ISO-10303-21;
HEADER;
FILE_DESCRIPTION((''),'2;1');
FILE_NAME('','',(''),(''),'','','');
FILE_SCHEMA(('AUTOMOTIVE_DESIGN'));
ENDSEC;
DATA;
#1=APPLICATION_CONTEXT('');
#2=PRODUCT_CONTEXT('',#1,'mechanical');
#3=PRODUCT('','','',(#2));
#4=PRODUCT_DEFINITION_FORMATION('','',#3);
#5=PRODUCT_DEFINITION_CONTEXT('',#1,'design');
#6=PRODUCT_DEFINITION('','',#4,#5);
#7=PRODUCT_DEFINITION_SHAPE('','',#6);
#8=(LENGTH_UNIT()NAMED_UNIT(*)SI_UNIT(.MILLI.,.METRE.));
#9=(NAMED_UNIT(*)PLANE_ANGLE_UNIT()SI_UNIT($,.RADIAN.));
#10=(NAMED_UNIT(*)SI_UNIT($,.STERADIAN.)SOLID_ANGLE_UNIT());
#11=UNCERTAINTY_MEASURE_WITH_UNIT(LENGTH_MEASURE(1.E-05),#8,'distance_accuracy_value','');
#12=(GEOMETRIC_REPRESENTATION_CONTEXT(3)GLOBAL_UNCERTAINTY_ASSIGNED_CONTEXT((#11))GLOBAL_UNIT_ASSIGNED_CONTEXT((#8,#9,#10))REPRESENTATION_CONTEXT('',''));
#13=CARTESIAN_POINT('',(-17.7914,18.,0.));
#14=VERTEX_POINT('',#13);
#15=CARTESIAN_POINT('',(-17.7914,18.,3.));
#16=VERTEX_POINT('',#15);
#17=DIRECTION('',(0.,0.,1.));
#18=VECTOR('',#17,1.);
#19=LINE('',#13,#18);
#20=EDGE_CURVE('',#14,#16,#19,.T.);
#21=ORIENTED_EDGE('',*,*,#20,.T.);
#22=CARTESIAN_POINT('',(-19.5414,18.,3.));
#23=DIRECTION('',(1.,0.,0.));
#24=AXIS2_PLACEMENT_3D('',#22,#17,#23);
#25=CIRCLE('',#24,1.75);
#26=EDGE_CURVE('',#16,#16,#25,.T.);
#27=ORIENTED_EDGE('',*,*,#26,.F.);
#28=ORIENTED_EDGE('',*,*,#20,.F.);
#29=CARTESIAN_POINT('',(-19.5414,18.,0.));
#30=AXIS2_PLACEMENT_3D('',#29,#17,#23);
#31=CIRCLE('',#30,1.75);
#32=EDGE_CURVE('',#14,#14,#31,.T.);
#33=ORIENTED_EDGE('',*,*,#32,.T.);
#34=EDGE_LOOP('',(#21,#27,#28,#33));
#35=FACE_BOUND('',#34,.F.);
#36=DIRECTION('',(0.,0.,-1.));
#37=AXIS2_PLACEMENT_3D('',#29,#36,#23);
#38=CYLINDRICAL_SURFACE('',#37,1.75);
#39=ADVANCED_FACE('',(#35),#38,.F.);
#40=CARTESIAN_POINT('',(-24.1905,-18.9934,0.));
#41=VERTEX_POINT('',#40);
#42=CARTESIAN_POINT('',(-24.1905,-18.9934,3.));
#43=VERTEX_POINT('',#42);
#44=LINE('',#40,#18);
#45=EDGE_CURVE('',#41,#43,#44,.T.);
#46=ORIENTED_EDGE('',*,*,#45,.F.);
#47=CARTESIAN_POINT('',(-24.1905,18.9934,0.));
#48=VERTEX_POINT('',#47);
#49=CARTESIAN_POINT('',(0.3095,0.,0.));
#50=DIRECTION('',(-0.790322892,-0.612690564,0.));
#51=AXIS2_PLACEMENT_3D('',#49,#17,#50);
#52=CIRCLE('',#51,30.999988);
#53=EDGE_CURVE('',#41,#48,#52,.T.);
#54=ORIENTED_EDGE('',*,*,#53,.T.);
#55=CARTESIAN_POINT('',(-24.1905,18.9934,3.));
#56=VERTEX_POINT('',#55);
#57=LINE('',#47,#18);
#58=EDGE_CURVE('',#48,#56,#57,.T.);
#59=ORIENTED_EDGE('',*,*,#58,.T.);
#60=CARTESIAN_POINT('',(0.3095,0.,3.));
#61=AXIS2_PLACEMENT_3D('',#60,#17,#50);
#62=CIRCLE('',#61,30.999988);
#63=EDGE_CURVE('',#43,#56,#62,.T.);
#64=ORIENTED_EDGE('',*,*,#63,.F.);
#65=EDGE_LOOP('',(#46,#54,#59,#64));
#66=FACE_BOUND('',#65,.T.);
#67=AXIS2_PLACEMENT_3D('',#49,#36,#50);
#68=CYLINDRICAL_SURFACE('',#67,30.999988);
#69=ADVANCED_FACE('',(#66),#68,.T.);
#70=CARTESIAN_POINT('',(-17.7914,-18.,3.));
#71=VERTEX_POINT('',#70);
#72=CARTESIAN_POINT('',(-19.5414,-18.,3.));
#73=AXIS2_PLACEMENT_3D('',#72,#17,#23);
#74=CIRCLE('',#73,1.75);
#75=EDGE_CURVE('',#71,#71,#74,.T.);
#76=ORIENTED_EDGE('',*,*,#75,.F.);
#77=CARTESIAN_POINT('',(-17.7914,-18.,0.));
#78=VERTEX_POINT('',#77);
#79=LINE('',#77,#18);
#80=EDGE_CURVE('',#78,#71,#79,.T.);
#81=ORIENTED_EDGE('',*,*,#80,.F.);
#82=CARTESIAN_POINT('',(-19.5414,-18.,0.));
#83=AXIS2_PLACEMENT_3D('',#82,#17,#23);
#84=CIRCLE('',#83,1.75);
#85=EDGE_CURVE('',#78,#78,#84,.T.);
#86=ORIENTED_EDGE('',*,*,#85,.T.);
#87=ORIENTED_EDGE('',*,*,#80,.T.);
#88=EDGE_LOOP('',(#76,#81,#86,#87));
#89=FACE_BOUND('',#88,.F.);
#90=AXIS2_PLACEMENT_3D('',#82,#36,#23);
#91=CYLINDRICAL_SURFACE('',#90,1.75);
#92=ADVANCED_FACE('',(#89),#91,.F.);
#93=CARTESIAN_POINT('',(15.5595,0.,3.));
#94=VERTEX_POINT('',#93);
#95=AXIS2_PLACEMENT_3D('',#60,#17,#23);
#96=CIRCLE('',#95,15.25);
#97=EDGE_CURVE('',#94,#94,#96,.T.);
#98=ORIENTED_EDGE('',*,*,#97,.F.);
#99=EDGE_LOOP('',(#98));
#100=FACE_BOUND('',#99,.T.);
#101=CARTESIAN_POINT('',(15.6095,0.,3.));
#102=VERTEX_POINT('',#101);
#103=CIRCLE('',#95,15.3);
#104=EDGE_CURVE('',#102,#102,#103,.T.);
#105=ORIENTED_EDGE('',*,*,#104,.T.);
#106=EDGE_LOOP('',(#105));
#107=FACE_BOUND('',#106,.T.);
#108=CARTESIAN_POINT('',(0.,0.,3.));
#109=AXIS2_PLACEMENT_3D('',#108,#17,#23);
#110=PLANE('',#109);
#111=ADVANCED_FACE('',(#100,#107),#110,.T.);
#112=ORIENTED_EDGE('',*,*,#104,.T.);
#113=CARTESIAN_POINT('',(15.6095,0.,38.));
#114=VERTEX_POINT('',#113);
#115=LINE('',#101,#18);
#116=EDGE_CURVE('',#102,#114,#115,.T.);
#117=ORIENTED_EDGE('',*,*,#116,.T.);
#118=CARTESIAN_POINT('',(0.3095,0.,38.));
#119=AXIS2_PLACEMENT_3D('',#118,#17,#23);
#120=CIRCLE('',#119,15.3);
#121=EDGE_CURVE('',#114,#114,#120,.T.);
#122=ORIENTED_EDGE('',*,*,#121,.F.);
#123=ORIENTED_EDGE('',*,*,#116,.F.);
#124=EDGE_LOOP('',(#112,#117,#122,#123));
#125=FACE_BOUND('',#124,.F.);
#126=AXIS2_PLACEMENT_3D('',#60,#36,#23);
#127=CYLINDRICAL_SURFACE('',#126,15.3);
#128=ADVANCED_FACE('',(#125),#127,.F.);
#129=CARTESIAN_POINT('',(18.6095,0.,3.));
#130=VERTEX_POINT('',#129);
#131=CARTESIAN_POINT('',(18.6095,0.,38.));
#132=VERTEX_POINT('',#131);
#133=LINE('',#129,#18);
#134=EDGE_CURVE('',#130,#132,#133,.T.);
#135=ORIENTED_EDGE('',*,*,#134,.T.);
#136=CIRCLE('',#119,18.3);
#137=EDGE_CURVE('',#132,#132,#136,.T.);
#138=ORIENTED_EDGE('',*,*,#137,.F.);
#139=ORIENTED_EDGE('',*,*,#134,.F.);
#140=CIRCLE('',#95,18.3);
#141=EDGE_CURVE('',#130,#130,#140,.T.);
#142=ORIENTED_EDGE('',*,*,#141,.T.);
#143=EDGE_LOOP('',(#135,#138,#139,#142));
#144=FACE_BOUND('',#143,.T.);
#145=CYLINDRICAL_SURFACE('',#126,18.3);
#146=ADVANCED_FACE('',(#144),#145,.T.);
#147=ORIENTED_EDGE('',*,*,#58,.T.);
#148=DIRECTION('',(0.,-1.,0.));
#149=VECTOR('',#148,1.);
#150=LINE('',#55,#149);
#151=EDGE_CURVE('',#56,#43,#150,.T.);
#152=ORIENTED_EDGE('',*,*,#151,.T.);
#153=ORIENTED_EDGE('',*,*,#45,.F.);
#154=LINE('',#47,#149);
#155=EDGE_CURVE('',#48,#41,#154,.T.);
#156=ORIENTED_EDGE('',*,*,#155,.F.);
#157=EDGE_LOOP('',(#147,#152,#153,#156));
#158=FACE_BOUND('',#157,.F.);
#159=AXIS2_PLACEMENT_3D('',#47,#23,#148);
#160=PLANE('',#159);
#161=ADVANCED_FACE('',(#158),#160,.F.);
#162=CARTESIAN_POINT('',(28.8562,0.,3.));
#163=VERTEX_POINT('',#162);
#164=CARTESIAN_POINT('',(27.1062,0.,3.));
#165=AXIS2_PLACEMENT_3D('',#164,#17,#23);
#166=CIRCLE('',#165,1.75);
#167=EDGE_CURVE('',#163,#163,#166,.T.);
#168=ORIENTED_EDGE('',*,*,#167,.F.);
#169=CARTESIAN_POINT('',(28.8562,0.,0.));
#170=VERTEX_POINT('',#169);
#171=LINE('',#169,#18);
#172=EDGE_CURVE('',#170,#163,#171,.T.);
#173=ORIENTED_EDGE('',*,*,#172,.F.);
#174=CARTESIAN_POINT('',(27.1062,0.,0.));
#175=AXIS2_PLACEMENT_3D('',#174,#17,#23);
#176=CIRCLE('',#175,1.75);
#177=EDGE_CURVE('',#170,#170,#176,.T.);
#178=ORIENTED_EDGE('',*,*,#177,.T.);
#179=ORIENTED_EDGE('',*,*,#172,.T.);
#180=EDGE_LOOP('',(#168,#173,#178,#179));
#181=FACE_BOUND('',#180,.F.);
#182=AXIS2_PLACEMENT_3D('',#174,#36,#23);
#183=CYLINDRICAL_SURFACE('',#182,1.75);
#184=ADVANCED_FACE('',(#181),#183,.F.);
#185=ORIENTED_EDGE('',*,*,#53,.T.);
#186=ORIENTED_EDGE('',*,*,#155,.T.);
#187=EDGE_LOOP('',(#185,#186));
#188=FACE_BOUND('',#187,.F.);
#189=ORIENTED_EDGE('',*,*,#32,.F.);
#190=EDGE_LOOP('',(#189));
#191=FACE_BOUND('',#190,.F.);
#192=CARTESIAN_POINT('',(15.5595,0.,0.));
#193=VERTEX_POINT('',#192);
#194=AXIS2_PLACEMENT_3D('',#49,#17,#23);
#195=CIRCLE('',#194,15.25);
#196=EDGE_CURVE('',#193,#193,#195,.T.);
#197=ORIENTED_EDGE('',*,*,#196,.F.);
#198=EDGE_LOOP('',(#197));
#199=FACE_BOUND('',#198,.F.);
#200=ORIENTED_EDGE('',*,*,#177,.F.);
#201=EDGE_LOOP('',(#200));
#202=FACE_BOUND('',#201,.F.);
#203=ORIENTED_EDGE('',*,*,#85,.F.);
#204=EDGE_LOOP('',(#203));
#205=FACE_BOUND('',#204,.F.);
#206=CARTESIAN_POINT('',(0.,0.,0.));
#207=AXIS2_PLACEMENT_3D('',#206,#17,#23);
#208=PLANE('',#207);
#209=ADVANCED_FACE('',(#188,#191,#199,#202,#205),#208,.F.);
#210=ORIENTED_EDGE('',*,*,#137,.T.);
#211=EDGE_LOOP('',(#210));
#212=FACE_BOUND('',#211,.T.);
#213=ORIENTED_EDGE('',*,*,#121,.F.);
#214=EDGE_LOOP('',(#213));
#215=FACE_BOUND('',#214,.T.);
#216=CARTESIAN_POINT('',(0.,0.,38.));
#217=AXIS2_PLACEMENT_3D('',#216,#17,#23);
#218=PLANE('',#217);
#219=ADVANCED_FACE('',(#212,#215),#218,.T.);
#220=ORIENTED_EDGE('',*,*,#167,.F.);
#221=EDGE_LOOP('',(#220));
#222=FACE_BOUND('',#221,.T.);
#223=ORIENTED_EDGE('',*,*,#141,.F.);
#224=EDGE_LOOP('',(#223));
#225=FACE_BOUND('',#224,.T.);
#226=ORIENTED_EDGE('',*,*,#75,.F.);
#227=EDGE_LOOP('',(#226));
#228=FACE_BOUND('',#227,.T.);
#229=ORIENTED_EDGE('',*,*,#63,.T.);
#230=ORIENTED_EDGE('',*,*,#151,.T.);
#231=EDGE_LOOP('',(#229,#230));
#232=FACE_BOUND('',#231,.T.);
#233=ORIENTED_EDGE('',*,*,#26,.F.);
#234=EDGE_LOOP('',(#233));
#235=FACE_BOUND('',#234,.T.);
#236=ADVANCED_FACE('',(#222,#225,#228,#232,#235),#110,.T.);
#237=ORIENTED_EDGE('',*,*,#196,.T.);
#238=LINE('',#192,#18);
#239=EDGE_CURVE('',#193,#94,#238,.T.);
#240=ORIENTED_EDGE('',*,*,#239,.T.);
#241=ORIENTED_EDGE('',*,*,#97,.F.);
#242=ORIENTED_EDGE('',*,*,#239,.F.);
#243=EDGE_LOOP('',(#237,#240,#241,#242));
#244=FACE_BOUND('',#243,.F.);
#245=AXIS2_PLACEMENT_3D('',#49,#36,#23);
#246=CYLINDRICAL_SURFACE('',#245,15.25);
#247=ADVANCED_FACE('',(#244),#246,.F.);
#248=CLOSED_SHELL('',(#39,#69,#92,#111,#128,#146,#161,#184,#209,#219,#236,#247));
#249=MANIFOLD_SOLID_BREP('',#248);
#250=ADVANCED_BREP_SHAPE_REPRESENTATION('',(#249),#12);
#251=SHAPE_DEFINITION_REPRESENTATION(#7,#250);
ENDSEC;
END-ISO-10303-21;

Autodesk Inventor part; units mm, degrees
ref_plane "YZ Plane" through (0, 0, 0) normal (1, 0, 0) x (0, 1, 0)
ref_plane "XZ Plane" through (0, 0, 0) normal (0, 1, 0) x (-1, 0, 0)
ref_plane "XY Plane" through (0, 0, 0) normal (0, 0, 1) x (1, 0, 0)
ref_plane "Work Plane1" through (0, 0, 0) normal (0, 0, 1) x (1, 0, 0)
sketch "Sketch1" plane through (0, 0, 0) normal (0, 0, 1) x (1, 0, 0)
  circle A0 centre (27.1062, 0) radius 1.75 construction
  circle A1 centre (-19.5414, -18) radius 1.75 construction
  circle A2 centre (-19.5414, 18) radius 1.75 construction
  arc A3 (-24.1905, -18.9934) -> (-24.1905, 18.9934) centre (0.3095, 0) ccw projected
  circle A4 centre (0.3095, 0) radius 15.25 projected
  circle A5 centre (-19.5414, 18) radius 1.75 projected
  circle A6 centre (-19.5414, -18) radius 1.75 projected
  circle A7 centre (27.1062, 0) radius 1.75 projected
  line L0 (-24.1905, 18.9934) -> (-24.1905, -18.9934) projected
  arc A8 (-24.1905, -18.9934) -> (-24.1905, 18.9934) centre (0.3095, 0) ccw projected
  circle A9 centre (0.3095, 0) radius 15.25
  point P0 (0, 0)
extrude "Extrusion1" add sketch "Sketch1" along normal blind 3
sketch "Sketch2" plane through (0, 0, 3) normal (0, 0, 1) x (1, 0, 0)
  circle A0 centre (0.3095, 0) radius 15.25 projected
  circle A1 centre (0.3095, 0) radius 15.3
  circle A2 centre (0.3095, 0) radius 18.3
  point P0 (0, 0)
  dimension "d2" = 30.6
  dimension "d3" = 3
extrude "Extrusion2" add sketch "Sketch2" along normal blind 35 contours A2
properties part number "10_Zeiss_Axiotech_Eypiecemount_Adapter"
